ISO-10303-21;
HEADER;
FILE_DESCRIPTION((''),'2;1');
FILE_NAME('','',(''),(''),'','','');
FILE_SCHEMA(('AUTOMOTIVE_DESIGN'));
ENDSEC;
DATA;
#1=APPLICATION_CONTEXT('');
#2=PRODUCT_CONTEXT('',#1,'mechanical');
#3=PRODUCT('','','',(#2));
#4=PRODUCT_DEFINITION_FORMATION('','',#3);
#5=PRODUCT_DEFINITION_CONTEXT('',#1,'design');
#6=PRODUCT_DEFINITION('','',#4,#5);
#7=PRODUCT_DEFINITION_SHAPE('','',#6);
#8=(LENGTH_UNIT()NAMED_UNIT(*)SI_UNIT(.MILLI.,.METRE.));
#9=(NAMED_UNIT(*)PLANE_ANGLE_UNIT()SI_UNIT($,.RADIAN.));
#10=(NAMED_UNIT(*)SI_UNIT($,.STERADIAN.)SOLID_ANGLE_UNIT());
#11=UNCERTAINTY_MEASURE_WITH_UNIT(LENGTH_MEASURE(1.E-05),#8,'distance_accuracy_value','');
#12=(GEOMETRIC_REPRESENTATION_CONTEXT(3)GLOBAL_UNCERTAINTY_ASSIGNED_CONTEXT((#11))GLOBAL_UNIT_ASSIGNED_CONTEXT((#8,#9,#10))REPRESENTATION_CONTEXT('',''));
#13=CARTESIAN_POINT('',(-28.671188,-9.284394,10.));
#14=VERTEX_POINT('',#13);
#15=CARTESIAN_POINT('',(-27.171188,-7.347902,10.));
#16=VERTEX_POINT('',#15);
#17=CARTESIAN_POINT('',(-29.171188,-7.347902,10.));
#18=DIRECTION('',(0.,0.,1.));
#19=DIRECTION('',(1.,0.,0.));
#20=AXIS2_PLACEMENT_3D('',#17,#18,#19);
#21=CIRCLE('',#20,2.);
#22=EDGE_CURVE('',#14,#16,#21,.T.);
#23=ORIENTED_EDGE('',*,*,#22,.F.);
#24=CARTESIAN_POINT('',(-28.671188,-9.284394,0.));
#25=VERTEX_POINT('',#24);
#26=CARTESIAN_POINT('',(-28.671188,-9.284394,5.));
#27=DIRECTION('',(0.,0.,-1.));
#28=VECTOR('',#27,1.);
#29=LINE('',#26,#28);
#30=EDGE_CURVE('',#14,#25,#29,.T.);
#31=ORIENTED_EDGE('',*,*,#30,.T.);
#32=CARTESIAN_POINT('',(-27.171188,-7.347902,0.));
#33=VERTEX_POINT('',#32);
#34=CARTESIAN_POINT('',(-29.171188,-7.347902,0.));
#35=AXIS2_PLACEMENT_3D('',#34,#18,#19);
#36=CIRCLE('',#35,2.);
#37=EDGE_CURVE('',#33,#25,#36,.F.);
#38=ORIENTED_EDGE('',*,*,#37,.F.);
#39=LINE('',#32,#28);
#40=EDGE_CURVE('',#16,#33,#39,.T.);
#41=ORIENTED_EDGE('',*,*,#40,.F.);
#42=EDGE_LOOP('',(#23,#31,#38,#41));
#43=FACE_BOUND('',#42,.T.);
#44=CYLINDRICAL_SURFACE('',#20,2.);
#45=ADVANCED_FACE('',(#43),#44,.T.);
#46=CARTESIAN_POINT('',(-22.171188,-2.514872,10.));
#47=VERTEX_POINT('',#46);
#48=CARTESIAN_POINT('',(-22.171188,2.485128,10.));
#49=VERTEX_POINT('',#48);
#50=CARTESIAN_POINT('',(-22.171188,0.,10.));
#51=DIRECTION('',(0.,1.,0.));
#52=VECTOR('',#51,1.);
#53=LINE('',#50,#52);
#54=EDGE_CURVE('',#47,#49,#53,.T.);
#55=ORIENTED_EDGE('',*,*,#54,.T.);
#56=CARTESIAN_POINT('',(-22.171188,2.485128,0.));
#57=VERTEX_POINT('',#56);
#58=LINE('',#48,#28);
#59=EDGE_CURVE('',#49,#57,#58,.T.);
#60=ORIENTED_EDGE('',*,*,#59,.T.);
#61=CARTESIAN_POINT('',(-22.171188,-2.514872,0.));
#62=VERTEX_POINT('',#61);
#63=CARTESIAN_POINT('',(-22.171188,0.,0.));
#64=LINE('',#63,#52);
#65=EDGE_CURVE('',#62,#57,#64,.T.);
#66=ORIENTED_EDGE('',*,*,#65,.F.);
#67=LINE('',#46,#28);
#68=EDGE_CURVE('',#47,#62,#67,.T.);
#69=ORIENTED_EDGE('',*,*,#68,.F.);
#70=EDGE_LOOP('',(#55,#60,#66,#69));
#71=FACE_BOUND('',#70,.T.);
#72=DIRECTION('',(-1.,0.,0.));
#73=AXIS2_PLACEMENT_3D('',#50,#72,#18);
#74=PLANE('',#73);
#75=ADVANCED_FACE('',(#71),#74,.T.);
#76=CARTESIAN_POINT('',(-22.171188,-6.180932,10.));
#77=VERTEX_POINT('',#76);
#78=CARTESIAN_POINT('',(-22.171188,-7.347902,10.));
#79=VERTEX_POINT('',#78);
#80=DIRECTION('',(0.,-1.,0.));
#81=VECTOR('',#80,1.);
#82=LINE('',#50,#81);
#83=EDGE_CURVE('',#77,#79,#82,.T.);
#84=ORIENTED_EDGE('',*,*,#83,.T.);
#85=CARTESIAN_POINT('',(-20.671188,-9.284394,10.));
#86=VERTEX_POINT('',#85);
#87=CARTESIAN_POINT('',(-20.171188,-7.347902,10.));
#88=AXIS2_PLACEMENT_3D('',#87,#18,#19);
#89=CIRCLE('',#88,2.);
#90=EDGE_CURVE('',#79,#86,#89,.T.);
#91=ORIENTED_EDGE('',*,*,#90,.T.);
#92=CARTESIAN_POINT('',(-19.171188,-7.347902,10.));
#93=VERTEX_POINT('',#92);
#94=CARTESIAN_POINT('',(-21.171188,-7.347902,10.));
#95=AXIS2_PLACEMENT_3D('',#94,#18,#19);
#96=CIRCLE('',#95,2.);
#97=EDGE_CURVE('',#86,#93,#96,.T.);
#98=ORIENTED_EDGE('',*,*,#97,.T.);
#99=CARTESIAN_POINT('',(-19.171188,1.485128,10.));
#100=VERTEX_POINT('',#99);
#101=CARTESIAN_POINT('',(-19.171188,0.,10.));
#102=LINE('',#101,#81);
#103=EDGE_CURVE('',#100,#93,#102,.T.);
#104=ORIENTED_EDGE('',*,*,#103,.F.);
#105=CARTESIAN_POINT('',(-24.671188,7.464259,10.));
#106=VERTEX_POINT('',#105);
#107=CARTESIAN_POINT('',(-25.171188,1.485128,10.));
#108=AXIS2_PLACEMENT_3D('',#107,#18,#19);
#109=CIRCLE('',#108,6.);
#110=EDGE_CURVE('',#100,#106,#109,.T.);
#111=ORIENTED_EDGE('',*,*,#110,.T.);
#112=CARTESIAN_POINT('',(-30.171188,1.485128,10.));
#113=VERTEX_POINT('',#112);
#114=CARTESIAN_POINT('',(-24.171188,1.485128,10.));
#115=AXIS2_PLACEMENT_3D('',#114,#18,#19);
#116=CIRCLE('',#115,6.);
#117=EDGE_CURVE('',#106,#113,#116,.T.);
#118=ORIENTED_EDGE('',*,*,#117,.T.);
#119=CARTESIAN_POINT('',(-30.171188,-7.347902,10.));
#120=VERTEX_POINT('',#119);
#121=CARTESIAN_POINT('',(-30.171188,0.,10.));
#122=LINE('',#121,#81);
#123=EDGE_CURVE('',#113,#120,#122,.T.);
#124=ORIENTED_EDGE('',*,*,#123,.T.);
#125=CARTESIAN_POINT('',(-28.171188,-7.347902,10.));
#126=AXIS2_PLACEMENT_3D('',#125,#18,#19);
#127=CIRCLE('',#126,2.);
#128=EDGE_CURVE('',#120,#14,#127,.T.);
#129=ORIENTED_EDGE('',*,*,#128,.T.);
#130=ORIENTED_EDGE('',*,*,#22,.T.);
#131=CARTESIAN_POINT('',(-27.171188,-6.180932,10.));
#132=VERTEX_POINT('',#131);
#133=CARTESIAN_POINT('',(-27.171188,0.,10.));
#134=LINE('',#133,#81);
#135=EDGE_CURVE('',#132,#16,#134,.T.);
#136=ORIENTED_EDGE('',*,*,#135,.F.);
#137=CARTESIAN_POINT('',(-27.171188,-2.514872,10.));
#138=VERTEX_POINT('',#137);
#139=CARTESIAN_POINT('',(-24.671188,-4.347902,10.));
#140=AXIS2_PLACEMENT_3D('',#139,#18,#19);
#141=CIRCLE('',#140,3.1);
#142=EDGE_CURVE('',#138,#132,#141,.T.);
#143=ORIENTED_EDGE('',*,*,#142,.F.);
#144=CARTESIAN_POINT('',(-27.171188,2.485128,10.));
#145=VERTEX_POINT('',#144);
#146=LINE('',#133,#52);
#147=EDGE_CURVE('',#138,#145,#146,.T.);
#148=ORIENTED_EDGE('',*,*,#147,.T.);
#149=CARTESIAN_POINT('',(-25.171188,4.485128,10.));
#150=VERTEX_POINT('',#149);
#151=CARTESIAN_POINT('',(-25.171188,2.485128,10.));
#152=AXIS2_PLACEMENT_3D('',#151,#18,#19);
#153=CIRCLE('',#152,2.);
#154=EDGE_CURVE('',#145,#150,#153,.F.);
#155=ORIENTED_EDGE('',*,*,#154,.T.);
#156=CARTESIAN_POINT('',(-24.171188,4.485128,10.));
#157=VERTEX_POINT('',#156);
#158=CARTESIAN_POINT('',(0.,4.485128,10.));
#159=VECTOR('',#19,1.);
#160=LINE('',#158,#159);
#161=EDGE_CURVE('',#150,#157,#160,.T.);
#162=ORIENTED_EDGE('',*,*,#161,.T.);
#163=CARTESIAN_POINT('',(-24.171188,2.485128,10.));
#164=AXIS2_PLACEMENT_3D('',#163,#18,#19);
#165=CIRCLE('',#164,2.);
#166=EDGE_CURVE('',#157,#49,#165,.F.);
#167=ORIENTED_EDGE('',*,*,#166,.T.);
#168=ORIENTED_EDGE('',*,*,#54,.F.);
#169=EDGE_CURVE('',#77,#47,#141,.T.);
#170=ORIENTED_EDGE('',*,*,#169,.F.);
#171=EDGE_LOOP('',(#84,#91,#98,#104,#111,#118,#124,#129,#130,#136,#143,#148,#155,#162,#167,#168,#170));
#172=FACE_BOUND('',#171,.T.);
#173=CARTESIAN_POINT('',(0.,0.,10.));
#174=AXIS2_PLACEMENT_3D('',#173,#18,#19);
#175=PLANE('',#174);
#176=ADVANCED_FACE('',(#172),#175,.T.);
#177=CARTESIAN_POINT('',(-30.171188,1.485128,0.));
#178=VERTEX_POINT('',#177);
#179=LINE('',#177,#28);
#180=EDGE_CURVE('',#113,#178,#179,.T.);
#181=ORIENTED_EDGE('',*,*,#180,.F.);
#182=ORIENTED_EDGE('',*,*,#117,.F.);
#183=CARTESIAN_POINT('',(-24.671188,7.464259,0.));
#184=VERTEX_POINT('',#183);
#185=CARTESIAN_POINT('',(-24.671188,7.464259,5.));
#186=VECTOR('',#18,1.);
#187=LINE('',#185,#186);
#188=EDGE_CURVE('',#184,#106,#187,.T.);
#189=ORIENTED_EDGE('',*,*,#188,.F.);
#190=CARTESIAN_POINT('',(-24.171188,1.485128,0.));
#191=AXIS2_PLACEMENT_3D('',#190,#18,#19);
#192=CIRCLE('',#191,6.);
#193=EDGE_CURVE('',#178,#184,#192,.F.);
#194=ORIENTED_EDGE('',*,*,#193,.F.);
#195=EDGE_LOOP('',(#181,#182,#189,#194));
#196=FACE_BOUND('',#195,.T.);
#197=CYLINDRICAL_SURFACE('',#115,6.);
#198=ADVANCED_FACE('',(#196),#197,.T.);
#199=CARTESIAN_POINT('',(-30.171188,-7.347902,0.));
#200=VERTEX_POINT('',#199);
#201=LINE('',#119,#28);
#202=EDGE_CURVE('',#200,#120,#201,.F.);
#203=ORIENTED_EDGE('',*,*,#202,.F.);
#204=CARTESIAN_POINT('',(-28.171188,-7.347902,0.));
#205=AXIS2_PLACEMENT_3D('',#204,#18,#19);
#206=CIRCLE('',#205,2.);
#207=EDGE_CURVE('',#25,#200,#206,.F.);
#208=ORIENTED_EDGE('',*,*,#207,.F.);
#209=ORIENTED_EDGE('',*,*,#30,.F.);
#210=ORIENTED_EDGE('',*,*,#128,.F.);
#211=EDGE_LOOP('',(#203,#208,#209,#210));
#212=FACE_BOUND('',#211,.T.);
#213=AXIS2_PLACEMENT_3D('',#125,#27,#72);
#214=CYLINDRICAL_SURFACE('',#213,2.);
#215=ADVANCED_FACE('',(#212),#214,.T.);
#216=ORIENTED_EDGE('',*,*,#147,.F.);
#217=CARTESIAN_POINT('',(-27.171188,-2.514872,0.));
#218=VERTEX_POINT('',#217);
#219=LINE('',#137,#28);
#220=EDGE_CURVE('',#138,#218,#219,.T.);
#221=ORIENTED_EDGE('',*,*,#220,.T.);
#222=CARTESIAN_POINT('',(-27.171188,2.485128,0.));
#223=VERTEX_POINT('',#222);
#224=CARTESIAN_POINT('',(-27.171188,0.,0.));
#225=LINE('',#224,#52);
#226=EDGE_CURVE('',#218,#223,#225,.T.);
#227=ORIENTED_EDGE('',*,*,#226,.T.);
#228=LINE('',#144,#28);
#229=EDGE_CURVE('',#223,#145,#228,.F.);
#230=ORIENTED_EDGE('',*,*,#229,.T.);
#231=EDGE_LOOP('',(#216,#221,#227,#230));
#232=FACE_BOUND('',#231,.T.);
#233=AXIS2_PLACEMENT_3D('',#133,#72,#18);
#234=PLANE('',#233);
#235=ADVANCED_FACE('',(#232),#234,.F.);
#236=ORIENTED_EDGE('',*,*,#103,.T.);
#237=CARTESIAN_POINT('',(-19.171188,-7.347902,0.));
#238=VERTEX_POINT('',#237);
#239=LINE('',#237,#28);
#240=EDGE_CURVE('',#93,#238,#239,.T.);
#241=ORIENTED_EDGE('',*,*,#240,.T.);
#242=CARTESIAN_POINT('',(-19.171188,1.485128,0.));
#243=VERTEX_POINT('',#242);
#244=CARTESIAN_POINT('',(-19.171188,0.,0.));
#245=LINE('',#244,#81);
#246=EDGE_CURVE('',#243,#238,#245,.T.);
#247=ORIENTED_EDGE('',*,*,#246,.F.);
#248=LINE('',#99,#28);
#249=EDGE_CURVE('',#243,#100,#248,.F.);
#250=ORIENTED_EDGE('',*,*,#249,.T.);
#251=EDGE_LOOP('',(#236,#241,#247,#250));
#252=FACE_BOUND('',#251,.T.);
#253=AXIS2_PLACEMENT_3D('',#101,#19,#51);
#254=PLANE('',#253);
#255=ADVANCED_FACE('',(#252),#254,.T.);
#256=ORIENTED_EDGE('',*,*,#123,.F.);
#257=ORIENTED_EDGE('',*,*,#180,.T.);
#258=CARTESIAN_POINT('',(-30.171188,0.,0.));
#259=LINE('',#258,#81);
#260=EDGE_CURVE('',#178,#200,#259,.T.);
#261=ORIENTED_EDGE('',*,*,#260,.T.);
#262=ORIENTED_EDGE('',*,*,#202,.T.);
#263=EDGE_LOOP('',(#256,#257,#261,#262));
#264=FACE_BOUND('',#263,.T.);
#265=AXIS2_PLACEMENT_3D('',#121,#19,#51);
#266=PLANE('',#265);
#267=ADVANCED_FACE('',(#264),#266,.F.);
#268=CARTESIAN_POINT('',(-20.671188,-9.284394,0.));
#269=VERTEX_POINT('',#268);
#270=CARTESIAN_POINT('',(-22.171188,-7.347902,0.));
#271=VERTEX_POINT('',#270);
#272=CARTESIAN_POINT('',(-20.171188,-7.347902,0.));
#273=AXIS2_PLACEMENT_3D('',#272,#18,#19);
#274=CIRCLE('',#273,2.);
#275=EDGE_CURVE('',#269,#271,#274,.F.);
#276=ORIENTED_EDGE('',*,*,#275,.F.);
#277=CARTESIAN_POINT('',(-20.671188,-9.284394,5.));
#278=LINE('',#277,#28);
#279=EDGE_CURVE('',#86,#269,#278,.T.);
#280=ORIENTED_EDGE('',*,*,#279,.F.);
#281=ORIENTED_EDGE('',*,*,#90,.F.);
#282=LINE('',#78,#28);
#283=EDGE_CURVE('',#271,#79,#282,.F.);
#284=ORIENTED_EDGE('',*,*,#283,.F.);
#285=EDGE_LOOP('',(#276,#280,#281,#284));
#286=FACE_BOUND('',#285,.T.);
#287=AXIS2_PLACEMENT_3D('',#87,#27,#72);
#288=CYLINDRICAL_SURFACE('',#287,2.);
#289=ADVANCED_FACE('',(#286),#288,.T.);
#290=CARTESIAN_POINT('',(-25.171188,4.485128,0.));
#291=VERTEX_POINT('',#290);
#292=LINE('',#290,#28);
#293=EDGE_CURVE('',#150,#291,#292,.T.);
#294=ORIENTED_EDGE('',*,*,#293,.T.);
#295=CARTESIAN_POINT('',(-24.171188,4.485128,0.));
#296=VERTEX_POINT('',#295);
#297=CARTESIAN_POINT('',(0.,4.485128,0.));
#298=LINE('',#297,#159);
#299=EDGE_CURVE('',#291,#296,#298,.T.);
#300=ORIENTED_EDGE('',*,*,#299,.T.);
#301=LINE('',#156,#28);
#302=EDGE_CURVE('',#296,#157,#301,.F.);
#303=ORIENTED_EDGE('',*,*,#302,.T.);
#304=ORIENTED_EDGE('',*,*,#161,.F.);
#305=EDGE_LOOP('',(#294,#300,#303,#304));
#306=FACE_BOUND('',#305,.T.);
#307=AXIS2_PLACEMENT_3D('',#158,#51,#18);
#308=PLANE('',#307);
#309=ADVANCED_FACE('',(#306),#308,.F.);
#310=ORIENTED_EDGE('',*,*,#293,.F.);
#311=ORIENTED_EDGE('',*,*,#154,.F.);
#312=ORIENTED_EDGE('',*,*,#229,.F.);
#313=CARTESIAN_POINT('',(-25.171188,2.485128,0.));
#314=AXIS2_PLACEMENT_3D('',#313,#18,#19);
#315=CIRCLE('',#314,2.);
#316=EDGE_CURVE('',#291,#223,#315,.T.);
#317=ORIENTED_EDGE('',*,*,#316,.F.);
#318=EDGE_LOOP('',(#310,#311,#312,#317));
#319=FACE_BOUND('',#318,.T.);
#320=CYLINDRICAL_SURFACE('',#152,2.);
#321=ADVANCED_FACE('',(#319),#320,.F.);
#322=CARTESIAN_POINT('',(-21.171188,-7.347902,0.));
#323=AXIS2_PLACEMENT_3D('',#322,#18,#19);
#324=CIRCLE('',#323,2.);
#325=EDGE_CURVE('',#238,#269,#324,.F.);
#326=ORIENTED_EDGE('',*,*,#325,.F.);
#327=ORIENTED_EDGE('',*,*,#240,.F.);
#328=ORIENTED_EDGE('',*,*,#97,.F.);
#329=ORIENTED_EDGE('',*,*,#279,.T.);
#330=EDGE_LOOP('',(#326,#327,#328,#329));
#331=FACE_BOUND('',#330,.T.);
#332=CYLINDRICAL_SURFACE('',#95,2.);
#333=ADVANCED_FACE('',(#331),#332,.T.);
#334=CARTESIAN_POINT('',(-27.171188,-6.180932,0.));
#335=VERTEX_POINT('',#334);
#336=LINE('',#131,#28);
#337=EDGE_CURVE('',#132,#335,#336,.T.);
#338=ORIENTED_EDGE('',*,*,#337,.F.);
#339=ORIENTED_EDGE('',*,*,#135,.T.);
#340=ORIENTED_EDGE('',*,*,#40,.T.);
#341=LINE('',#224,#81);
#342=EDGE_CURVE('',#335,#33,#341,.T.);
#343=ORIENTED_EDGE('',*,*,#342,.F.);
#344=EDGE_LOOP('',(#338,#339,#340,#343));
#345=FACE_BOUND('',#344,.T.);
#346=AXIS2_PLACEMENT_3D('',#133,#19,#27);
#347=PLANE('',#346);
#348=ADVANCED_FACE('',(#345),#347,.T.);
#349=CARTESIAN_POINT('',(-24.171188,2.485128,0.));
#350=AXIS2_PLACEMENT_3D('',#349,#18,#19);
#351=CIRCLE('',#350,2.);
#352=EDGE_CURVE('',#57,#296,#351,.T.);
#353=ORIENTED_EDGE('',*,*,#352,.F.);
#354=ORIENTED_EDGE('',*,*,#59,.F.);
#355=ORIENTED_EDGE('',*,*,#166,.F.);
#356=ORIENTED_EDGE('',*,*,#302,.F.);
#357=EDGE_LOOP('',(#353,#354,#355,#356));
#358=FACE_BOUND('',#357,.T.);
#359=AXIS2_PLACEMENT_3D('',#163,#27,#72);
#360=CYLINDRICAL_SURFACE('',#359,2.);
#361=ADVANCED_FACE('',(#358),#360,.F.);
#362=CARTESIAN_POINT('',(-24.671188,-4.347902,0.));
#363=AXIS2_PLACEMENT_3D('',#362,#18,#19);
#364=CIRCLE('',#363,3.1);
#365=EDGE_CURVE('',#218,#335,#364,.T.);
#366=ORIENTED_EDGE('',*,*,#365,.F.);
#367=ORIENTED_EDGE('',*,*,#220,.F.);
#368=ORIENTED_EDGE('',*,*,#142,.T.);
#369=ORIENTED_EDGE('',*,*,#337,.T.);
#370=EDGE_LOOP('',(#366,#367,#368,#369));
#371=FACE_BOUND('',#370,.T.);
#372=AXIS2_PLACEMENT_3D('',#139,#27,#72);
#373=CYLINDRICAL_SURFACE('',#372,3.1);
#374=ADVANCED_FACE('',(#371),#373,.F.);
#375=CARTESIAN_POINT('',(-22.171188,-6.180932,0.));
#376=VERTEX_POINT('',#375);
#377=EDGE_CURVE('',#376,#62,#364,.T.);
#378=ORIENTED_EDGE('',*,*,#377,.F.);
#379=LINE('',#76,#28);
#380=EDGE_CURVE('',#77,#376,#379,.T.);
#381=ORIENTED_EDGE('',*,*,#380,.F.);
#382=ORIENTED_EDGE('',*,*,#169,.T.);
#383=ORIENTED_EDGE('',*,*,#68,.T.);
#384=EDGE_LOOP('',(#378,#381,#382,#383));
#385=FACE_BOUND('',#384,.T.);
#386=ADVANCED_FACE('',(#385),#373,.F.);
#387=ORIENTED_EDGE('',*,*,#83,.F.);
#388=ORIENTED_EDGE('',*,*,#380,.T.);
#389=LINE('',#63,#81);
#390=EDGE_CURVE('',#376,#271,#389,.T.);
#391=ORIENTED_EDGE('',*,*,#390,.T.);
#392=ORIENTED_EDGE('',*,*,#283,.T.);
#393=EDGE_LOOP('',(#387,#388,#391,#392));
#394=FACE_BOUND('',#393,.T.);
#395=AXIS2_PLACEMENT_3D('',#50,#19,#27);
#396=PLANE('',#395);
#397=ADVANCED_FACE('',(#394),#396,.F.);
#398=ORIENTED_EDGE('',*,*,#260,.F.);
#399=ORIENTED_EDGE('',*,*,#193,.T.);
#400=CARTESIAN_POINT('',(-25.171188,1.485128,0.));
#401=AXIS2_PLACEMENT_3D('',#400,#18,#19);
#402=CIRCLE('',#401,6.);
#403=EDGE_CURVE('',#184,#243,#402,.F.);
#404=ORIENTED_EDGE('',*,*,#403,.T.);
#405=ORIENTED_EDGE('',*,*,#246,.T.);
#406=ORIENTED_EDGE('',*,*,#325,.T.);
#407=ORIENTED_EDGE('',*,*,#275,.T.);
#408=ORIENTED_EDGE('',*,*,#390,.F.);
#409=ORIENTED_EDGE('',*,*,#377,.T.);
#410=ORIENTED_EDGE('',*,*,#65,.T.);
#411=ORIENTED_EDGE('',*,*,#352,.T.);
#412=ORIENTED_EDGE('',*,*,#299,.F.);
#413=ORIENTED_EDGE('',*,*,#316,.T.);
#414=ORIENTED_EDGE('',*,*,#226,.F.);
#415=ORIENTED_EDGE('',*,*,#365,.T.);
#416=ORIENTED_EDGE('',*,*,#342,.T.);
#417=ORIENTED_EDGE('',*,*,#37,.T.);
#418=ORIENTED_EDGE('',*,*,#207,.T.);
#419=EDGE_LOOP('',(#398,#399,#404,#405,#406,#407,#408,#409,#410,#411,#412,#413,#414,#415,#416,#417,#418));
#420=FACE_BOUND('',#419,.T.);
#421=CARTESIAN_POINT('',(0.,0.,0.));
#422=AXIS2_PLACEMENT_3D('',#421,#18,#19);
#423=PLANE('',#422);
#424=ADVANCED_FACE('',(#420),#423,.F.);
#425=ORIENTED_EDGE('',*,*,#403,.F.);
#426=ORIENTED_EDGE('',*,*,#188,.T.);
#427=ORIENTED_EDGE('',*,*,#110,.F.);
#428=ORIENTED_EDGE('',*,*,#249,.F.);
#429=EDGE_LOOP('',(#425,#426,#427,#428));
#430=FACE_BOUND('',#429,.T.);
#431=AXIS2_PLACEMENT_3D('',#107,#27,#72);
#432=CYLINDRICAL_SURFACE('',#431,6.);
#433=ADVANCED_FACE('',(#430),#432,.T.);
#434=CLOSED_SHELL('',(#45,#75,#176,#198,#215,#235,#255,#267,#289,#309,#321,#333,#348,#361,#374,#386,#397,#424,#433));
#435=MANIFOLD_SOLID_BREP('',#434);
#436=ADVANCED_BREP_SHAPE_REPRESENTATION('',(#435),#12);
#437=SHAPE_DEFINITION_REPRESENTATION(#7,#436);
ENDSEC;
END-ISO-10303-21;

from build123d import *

# Parameters (mm, degrees)
BOSS_EXTRUDE1_DEPTH = 10
FILLET1_R           = 6
FILLET2_R           = 2
FILLET3_R           = 2


with BuildPart() as part:
    # Sketch1 → Boss-Extrude1 (new body)
    with BuildSketch(Plane.XY):
        with BuildLine():
            Line((-27.171188048, -9.347902097), (-27.171188048, -6.180932375))
            ThreePointArc((-27.171188048, -6.180932375), (-27.771188048, -4.347902097), (-27.171188048, -2.514871819))
            Line((-27.171188048, -2.514871819), (-27.171188048, 4.485128181))
            Line((-27.171188048, 4.485128181), (-22.171188048, 4.485128181))
            Line((-22.171188048, 4.485128181), (-22.171188048, -2.514871819))
            ThreePointArc((-22.171188048, -2.514871819), (-21.725004076, -3.38353702), (-21.571188048, -4.347902097))
            ThreePointArc((-21.571188048, -4.347902097), (-21.725004076, -5.312267173), (-22.171188048, -6.180932375))
            Line((-22.171188048, -6.180932375), (-22.171188048, -9.347902097))
            Line((-22.171188048, -9.347902097), (-19.171188048, -9.347902097))
            Line((-19.171188048, -9.347902097), (-19.171188048, 7.485128181))
            Line((-19.171188048, 7.485128181), (-30.171188048, 7.485128181))
            Line((-30.171188048, 7.485128181), (-30.171188048, -9.347902097))
            Line((-30.171188048, -9.347902097), (-27.171188048, -9.347902097))
        make_face()
    extrude(amount=BOSS_EXTRUDE1_DEPTH)

    # Fillet1
    # the kernel refuses this fillet: 6 mm, written as the material it takes off along each edge
    with BuildSketch(Plane(origin=(-19.171188048, 7.485128181, -15), x_dir=(-1, 0, 0), z_dir=(0, 0, 1))) as fillet1_piece_1:
        with BuildLine():
            CenterArc((FILLET1_R, FILLET1_R), FILLET1_R, 180, 90)
            Line((0, FILLET1_R), (0, 0))
            Line((0, 0), (FILLET1_R, 0))
        make_face()
    extrude(amount=40, mode=Mode.SUBTRACT)
    with BuildSketch(Plane(origin=(-30.171188048, 7.485128181, -15), x_dir=(1, 0, 0), z_dir=(0, 0, 1))) as fillet1_piece_2:
        with BuildLine():
            CenterArc((FILLET1_R, -FILLET1_R), FILLET1_R, 90, 90)
            Line((0, -FILLET1_R), (0, 0))
            Line((0, 0), (FILLET1_R, 0))
        make_face()
    extrude(amount=40, mode=Mode.SUBTRACT)

    # Fillet2
    # the kernel refuses this fillet: 2 mm, written as the material it takes off along each edge
    with BuildSketch(Plane(origin=(-19.171188048, -9.347902097, -5), x_dir=(0, 1, 0), z_dir=(0, 0, 1)), Plane(origin=(-22.171188048, -9.347902097, -5), x_dir=(1, 0, 0), z_dir=(0, 0, 1)), Plane(origin=(-30.171188048, -9.347902097, -5), x_dir=(1, 0, 0), z_dir=(0, 0, 1))) as fillet2_piece_1:
        with BuildLine():
            CenterArc((FILLET2_R, FILLET2_R), FILLET2_R, 180, 90)
            Line((0, FILLET2_R), (0, 0))
            Line((0, 0), (FILLET2_R, 0))
        make_face()
    extrude(amount=20, mode=Mode.SUBTRACT)
    with BuildSketch(Plane(origin=(-27.171188048, -9.347902097, -5), x_dir=(-1, 0, 0), z_dir=(0, 0, 1))) as fillet2_piece_2:
        with BuildLine():
            CenterArc((FILLET2_R, -FILLET2_R), FILLET2_R, 90, 90)
            Line((0, -FILLET2_R), (0, 0))
            Line((0, 0), (FILLET2_R, 0))
        make_face()
    extrude(amount=20, mode=Mode.SUBTRACT)

    # Fillet3
    fillet3_edges = [part.edges().sort_by_distance(p)[0] for p in [
        (-22.171188048, 4.485128181, 5),
        (-27.171188048, 4.485128181, 5),
    ]]
    fillet(fillet3_edges, radius=FILLET3_R)


solid = part.part
